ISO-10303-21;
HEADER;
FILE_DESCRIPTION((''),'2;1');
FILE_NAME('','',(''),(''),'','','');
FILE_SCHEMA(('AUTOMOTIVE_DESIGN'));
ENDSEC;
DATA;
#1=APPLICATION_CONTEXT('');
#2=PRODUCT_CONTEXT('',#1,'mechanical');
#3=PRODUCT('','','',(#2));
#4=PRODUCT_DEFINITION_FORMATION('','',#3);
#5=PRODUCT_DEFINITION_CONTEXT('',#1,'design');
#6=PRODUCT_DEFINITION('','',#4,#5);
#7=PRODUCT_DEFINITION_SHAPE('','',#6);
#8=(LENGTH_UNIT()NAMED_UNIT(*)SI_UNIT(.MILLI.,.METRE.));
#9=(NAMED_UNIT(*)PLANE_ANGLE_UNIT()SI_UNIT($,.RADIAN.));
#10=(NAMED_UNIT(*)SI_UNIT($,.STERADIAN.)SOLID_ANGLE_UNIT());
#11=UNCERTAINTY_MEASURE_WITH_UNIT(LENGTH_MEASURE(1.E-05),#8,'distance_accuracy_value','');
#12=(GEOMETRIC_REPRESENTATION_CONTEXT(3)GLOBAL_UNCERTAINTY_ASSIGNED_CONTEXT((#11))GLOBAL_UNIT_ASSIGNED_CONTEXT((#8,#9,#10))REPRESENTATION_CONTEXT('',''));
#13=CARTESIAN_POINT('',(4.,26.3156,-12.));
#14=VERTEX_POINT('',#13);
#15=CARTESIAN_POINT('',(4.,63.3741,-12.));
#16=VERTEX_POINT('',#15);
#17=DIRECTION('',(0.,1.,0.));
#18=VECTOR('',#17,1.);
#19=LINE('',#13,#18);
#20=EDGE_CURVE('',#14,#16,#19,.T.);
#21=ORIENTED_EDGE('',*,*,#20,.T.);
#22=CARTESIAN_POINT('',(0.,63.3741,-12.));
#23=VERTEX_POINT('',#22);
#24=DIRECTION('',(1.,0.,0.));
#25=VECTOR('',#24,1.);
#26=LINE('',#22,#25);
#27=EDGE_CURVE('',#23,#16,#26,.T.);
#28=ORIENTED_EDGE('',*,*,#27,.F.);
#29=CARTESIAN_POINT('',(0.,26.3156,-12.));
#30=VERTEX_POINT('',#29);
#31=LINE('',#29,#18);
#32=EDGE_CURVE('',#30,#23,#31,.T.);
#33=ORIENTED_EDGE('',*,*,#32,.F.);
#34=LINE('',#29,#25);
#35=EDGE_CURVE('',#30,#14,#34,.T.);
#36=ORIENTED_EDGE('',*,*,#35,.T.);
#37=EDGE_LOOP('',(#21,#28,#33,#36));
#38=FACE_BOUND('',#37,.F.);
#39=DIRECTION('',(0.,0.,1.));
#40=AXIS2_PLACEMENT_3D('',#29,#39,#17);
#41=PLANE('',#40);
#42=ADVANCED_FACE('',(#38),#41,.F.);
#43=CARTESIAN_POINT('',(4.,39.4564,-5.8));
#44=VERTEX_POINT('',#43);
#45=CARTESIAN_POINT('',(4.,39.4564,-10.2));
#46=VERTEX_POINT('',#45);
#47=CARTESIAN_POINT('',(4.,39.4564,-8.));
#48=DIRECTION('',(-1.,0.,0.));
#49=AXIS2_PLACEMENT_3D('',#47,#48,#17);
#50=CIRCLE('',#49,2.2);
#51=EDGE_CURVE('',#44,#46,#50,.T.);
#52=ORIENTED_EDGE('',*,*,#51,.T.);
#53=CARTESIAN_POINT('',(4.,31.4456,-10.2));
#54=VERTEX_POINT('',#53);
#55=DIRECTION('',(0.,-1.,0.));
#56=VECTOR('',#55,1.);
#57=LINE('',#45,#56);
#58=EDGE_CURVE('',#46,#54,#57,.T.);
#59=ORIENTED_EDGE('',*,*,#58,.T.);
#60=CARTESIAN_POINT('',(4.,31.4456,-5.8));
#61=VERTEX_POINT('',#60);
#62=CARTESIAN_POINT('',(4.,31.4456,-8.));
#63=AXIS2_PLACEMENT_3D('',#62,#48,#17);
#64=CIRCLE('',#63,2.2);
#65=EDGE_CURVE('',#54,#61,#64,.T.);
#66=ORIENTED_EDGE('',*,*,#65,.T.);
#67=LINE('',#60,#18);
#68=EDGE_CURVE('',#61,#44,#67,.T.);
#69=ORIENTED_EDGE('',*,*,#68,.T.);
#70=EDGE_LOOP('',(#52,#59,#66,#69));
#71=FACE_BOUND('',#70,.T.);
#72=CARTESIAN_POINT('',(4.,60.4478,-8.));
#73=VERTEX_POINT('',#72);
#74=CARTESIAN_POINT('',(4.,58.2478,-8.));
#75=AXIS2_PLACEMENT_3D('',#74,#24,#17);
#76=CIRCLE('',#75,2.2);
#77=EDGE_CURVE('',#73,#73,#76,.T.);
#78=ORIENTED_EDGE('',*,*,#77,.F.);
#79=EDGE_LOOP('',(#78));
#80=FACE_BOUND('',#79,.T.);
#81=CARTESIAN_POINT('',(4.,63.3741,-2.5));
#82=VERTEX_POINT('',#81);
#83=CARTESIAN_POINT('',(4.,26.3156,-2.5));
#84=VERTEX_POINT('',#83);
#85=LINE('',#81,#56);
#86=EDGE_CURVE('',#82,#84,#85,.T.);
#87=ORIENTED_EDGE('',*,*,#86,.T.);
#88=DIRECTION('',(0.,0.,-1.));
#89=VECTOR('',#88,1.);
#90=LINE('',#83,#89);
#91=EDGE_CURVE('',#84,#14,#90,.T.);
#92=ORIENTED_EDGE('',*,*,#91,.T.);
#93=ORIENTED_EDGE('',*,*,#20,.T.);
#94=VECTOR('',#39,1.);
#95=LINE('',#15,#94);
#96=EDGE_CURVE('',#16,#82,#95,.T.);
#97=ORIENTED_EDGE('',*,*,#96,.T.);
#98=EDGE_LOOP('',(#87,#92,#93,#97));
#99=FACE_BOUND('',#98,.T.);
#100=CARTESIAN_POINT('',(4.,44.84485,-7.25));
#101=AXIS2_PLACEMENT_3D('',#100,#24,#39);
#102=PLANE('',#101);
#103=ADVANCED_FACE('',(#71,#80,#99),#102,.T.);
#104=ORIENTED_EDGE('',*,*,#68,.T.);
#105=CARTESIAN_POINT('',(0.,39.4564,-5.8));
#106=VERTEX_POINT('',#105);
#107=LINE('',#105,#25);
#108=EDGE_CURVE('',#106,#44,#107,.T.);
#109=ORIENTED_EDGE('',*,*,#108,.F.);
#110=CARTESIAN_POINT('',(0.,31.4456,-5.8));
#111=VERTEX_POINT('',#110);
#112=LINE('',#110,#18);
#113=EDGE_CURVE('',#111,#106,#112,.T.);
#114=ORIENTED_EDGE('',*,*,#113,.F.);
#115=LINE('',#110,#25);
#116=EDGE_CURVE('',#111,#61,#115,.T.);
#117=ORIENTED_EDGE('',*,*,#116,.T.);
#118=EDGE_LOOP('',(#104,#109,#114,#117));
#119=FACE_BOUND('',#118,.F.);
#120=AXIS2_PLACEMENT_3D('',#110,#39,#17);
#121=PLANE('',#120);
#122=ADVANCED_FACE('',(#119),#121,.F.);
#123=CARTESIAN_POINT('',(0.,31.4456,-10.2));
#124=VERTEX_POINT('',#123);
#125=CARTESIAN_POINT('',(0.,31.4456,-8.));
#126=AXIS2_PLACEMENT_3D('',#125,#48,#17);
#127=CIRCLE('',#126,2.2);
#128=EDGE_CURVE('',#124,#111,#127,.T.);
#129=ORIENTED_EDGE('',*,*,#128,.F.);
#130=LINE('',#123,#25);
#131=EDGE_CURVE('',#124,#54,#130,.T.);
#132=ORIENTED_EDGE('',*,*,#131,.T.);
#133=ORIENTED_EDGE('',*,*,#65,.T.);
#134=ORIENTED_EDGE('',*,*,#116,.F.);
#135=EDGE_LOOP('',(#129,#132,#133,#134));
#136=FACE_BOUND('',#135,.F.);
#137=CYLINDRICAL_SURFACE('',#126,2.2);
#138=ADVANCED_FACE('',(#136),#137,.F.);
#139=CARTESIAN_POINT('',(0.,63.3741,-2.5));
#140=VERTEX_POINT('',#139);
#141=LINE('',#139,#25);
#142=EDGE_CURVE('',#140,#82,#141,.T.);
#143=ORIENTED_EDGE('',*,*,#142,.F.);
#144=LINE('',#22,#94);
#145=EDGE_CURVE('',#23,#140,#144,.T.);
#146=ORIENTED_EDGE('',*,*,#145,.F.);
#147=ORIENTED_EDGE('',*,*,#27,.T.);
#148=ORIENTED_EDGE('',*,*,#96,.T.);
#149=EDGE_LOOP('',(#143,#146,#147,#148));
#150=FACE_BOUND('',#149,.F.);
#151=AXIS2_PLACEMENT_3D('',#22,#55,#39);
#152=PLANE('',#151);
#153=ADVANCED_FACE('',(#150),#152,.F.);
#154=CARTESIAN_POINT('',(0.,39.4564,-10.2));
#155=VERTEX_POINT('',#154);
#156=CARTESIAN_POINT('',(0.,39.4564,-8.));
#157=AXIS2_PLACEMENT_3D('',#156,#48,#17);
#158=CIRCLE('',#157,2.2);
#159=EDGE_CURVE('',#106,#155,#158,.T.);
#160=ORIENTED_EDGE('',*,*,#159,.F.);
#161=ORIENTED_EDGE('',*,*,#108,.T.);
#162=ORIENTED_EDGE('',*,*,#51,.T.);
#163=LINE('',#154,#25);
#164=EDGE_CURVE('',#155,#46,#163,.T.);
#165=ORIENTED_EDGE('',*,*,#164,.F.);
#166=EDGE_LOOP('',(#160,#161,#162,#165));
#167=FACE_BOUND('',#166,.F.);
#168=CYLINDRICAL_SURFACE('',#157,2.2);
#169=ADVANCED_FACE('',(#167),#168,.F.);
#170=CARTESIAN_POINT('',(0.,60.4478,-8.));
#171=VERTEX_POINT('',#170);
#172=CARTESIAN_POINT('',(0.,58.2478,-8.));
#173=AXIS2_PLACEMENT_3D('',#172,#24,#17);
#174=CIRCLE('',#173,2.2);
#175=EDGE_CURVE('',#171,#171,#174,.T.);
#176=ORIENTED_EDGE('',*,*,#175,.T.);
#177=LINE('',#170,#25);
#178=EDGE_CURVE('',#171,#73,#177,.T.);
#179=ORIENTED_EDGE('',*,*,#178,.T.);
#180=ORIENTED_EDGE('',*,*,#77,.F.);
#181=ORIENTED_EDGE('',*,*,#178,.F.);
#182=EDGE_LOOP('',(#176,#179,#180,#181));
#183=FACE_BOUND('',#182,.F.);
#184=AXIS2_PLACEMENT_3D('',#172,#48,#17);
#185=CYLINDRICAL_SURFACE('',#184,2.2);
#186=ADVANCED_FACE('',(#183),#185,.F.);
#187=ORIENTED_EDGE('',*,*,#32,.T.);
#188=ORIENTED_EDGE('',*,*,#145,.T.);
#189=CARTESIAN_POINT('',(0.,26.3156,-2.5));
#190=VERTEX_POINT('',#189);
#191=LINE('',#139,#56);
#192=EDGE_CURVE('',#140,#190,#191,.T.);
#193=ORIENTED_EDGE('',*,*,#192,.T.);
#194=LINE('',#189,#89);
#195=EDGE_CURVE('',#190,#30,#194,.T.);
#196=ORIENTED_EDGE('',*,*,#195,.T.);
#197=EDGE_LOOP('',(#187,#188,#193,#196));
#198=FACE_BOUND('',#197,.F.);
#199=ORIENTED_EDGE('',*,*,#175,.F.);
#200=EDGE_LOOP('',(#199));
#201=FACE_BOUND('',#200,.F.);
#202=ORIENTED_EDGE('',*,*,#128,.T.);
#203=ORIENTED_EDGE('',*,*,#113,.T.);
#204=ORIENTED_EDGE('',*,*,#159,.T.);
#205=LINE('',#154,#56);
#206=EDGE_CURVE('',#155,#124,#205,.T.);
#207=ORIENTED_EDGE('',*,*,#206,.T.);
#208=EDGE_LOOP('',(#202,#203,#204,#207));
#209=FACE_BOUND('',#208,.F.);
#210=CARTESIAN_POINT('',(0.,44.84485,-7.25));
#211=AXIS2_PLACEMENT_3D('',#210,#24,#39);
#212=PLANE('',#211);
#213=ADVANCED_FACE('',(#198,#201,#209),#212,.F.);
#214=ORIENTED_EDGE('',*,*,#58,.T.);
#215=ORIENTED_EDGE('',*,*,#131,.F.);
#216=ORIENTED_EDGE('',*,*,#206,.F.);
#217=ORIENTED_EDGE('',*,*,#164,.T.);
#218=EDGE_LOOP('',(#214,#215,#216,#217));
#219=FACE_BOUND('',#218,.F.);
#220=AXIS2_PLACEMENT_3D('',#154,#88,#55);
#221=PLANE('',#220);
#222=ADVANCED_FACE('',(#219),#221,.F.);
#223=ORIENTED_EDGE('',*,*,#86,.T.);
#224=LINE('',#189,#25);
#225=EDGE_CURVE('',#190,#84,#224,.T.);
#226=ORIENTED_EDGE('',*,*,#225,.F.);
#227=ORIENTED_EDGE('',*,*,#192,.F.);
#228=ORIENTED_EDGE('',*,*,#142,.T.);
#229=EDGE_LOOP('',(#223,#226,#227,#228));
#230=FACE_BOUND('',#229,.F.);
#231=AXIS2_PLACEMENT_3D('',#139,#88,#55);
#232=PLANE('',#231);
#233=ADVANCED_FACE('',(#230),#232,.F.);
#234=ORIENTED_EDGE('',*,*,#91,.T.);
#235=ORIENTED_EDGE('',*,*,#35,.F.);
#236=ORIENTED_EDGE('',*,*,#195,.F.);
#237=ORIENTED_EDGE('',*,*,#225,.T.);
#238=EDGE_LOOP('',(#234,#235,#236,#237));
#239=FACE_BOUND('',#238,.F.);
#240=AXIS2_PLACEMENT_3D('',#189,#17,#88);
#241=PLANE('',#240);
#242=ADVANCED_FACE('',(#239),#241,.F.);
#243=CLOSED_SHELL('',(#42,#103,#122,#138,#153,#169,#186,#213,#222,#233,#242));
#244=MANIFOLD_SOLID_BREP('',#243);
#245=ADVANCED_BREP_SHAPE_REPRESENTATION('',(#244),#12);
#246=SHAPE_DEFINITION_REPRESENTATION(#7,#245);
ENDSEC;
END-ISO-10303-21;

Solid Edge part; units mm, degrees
sketch "Sketch1" plane through (0, 0, 0) normal (1, 0, 0) x (0, 1, 0)
  line L0 (63.3741, -12) -> (63.3741, -2.5)
  line L1 (63.3741, -2.5) -> (26.3156, -2.5)
  line L2 (26.3156, -2.5) -> (26.3156, -12)
  line L3 (26.3156, -12) -> (63.3741, -12)
  line L4 (39.4564, -10.2) -> (31.4456, -10.2)
  arc A0 (39.4564, -5.8) -> (39.4564, -10.2) centre (39.4564, -8) cw
  line L5 (31.4456, -5.8) -> (39.4564, -5.8)
  arc A1 (31.4456, -10.2) -> (31.4456, -5.8) centre (31.4456, -8) cw
  circle A2 centre (58.2478, -8) radius 2.2
extrude "Protrusion1" add sketch "Sketch1" along normal blind 4
